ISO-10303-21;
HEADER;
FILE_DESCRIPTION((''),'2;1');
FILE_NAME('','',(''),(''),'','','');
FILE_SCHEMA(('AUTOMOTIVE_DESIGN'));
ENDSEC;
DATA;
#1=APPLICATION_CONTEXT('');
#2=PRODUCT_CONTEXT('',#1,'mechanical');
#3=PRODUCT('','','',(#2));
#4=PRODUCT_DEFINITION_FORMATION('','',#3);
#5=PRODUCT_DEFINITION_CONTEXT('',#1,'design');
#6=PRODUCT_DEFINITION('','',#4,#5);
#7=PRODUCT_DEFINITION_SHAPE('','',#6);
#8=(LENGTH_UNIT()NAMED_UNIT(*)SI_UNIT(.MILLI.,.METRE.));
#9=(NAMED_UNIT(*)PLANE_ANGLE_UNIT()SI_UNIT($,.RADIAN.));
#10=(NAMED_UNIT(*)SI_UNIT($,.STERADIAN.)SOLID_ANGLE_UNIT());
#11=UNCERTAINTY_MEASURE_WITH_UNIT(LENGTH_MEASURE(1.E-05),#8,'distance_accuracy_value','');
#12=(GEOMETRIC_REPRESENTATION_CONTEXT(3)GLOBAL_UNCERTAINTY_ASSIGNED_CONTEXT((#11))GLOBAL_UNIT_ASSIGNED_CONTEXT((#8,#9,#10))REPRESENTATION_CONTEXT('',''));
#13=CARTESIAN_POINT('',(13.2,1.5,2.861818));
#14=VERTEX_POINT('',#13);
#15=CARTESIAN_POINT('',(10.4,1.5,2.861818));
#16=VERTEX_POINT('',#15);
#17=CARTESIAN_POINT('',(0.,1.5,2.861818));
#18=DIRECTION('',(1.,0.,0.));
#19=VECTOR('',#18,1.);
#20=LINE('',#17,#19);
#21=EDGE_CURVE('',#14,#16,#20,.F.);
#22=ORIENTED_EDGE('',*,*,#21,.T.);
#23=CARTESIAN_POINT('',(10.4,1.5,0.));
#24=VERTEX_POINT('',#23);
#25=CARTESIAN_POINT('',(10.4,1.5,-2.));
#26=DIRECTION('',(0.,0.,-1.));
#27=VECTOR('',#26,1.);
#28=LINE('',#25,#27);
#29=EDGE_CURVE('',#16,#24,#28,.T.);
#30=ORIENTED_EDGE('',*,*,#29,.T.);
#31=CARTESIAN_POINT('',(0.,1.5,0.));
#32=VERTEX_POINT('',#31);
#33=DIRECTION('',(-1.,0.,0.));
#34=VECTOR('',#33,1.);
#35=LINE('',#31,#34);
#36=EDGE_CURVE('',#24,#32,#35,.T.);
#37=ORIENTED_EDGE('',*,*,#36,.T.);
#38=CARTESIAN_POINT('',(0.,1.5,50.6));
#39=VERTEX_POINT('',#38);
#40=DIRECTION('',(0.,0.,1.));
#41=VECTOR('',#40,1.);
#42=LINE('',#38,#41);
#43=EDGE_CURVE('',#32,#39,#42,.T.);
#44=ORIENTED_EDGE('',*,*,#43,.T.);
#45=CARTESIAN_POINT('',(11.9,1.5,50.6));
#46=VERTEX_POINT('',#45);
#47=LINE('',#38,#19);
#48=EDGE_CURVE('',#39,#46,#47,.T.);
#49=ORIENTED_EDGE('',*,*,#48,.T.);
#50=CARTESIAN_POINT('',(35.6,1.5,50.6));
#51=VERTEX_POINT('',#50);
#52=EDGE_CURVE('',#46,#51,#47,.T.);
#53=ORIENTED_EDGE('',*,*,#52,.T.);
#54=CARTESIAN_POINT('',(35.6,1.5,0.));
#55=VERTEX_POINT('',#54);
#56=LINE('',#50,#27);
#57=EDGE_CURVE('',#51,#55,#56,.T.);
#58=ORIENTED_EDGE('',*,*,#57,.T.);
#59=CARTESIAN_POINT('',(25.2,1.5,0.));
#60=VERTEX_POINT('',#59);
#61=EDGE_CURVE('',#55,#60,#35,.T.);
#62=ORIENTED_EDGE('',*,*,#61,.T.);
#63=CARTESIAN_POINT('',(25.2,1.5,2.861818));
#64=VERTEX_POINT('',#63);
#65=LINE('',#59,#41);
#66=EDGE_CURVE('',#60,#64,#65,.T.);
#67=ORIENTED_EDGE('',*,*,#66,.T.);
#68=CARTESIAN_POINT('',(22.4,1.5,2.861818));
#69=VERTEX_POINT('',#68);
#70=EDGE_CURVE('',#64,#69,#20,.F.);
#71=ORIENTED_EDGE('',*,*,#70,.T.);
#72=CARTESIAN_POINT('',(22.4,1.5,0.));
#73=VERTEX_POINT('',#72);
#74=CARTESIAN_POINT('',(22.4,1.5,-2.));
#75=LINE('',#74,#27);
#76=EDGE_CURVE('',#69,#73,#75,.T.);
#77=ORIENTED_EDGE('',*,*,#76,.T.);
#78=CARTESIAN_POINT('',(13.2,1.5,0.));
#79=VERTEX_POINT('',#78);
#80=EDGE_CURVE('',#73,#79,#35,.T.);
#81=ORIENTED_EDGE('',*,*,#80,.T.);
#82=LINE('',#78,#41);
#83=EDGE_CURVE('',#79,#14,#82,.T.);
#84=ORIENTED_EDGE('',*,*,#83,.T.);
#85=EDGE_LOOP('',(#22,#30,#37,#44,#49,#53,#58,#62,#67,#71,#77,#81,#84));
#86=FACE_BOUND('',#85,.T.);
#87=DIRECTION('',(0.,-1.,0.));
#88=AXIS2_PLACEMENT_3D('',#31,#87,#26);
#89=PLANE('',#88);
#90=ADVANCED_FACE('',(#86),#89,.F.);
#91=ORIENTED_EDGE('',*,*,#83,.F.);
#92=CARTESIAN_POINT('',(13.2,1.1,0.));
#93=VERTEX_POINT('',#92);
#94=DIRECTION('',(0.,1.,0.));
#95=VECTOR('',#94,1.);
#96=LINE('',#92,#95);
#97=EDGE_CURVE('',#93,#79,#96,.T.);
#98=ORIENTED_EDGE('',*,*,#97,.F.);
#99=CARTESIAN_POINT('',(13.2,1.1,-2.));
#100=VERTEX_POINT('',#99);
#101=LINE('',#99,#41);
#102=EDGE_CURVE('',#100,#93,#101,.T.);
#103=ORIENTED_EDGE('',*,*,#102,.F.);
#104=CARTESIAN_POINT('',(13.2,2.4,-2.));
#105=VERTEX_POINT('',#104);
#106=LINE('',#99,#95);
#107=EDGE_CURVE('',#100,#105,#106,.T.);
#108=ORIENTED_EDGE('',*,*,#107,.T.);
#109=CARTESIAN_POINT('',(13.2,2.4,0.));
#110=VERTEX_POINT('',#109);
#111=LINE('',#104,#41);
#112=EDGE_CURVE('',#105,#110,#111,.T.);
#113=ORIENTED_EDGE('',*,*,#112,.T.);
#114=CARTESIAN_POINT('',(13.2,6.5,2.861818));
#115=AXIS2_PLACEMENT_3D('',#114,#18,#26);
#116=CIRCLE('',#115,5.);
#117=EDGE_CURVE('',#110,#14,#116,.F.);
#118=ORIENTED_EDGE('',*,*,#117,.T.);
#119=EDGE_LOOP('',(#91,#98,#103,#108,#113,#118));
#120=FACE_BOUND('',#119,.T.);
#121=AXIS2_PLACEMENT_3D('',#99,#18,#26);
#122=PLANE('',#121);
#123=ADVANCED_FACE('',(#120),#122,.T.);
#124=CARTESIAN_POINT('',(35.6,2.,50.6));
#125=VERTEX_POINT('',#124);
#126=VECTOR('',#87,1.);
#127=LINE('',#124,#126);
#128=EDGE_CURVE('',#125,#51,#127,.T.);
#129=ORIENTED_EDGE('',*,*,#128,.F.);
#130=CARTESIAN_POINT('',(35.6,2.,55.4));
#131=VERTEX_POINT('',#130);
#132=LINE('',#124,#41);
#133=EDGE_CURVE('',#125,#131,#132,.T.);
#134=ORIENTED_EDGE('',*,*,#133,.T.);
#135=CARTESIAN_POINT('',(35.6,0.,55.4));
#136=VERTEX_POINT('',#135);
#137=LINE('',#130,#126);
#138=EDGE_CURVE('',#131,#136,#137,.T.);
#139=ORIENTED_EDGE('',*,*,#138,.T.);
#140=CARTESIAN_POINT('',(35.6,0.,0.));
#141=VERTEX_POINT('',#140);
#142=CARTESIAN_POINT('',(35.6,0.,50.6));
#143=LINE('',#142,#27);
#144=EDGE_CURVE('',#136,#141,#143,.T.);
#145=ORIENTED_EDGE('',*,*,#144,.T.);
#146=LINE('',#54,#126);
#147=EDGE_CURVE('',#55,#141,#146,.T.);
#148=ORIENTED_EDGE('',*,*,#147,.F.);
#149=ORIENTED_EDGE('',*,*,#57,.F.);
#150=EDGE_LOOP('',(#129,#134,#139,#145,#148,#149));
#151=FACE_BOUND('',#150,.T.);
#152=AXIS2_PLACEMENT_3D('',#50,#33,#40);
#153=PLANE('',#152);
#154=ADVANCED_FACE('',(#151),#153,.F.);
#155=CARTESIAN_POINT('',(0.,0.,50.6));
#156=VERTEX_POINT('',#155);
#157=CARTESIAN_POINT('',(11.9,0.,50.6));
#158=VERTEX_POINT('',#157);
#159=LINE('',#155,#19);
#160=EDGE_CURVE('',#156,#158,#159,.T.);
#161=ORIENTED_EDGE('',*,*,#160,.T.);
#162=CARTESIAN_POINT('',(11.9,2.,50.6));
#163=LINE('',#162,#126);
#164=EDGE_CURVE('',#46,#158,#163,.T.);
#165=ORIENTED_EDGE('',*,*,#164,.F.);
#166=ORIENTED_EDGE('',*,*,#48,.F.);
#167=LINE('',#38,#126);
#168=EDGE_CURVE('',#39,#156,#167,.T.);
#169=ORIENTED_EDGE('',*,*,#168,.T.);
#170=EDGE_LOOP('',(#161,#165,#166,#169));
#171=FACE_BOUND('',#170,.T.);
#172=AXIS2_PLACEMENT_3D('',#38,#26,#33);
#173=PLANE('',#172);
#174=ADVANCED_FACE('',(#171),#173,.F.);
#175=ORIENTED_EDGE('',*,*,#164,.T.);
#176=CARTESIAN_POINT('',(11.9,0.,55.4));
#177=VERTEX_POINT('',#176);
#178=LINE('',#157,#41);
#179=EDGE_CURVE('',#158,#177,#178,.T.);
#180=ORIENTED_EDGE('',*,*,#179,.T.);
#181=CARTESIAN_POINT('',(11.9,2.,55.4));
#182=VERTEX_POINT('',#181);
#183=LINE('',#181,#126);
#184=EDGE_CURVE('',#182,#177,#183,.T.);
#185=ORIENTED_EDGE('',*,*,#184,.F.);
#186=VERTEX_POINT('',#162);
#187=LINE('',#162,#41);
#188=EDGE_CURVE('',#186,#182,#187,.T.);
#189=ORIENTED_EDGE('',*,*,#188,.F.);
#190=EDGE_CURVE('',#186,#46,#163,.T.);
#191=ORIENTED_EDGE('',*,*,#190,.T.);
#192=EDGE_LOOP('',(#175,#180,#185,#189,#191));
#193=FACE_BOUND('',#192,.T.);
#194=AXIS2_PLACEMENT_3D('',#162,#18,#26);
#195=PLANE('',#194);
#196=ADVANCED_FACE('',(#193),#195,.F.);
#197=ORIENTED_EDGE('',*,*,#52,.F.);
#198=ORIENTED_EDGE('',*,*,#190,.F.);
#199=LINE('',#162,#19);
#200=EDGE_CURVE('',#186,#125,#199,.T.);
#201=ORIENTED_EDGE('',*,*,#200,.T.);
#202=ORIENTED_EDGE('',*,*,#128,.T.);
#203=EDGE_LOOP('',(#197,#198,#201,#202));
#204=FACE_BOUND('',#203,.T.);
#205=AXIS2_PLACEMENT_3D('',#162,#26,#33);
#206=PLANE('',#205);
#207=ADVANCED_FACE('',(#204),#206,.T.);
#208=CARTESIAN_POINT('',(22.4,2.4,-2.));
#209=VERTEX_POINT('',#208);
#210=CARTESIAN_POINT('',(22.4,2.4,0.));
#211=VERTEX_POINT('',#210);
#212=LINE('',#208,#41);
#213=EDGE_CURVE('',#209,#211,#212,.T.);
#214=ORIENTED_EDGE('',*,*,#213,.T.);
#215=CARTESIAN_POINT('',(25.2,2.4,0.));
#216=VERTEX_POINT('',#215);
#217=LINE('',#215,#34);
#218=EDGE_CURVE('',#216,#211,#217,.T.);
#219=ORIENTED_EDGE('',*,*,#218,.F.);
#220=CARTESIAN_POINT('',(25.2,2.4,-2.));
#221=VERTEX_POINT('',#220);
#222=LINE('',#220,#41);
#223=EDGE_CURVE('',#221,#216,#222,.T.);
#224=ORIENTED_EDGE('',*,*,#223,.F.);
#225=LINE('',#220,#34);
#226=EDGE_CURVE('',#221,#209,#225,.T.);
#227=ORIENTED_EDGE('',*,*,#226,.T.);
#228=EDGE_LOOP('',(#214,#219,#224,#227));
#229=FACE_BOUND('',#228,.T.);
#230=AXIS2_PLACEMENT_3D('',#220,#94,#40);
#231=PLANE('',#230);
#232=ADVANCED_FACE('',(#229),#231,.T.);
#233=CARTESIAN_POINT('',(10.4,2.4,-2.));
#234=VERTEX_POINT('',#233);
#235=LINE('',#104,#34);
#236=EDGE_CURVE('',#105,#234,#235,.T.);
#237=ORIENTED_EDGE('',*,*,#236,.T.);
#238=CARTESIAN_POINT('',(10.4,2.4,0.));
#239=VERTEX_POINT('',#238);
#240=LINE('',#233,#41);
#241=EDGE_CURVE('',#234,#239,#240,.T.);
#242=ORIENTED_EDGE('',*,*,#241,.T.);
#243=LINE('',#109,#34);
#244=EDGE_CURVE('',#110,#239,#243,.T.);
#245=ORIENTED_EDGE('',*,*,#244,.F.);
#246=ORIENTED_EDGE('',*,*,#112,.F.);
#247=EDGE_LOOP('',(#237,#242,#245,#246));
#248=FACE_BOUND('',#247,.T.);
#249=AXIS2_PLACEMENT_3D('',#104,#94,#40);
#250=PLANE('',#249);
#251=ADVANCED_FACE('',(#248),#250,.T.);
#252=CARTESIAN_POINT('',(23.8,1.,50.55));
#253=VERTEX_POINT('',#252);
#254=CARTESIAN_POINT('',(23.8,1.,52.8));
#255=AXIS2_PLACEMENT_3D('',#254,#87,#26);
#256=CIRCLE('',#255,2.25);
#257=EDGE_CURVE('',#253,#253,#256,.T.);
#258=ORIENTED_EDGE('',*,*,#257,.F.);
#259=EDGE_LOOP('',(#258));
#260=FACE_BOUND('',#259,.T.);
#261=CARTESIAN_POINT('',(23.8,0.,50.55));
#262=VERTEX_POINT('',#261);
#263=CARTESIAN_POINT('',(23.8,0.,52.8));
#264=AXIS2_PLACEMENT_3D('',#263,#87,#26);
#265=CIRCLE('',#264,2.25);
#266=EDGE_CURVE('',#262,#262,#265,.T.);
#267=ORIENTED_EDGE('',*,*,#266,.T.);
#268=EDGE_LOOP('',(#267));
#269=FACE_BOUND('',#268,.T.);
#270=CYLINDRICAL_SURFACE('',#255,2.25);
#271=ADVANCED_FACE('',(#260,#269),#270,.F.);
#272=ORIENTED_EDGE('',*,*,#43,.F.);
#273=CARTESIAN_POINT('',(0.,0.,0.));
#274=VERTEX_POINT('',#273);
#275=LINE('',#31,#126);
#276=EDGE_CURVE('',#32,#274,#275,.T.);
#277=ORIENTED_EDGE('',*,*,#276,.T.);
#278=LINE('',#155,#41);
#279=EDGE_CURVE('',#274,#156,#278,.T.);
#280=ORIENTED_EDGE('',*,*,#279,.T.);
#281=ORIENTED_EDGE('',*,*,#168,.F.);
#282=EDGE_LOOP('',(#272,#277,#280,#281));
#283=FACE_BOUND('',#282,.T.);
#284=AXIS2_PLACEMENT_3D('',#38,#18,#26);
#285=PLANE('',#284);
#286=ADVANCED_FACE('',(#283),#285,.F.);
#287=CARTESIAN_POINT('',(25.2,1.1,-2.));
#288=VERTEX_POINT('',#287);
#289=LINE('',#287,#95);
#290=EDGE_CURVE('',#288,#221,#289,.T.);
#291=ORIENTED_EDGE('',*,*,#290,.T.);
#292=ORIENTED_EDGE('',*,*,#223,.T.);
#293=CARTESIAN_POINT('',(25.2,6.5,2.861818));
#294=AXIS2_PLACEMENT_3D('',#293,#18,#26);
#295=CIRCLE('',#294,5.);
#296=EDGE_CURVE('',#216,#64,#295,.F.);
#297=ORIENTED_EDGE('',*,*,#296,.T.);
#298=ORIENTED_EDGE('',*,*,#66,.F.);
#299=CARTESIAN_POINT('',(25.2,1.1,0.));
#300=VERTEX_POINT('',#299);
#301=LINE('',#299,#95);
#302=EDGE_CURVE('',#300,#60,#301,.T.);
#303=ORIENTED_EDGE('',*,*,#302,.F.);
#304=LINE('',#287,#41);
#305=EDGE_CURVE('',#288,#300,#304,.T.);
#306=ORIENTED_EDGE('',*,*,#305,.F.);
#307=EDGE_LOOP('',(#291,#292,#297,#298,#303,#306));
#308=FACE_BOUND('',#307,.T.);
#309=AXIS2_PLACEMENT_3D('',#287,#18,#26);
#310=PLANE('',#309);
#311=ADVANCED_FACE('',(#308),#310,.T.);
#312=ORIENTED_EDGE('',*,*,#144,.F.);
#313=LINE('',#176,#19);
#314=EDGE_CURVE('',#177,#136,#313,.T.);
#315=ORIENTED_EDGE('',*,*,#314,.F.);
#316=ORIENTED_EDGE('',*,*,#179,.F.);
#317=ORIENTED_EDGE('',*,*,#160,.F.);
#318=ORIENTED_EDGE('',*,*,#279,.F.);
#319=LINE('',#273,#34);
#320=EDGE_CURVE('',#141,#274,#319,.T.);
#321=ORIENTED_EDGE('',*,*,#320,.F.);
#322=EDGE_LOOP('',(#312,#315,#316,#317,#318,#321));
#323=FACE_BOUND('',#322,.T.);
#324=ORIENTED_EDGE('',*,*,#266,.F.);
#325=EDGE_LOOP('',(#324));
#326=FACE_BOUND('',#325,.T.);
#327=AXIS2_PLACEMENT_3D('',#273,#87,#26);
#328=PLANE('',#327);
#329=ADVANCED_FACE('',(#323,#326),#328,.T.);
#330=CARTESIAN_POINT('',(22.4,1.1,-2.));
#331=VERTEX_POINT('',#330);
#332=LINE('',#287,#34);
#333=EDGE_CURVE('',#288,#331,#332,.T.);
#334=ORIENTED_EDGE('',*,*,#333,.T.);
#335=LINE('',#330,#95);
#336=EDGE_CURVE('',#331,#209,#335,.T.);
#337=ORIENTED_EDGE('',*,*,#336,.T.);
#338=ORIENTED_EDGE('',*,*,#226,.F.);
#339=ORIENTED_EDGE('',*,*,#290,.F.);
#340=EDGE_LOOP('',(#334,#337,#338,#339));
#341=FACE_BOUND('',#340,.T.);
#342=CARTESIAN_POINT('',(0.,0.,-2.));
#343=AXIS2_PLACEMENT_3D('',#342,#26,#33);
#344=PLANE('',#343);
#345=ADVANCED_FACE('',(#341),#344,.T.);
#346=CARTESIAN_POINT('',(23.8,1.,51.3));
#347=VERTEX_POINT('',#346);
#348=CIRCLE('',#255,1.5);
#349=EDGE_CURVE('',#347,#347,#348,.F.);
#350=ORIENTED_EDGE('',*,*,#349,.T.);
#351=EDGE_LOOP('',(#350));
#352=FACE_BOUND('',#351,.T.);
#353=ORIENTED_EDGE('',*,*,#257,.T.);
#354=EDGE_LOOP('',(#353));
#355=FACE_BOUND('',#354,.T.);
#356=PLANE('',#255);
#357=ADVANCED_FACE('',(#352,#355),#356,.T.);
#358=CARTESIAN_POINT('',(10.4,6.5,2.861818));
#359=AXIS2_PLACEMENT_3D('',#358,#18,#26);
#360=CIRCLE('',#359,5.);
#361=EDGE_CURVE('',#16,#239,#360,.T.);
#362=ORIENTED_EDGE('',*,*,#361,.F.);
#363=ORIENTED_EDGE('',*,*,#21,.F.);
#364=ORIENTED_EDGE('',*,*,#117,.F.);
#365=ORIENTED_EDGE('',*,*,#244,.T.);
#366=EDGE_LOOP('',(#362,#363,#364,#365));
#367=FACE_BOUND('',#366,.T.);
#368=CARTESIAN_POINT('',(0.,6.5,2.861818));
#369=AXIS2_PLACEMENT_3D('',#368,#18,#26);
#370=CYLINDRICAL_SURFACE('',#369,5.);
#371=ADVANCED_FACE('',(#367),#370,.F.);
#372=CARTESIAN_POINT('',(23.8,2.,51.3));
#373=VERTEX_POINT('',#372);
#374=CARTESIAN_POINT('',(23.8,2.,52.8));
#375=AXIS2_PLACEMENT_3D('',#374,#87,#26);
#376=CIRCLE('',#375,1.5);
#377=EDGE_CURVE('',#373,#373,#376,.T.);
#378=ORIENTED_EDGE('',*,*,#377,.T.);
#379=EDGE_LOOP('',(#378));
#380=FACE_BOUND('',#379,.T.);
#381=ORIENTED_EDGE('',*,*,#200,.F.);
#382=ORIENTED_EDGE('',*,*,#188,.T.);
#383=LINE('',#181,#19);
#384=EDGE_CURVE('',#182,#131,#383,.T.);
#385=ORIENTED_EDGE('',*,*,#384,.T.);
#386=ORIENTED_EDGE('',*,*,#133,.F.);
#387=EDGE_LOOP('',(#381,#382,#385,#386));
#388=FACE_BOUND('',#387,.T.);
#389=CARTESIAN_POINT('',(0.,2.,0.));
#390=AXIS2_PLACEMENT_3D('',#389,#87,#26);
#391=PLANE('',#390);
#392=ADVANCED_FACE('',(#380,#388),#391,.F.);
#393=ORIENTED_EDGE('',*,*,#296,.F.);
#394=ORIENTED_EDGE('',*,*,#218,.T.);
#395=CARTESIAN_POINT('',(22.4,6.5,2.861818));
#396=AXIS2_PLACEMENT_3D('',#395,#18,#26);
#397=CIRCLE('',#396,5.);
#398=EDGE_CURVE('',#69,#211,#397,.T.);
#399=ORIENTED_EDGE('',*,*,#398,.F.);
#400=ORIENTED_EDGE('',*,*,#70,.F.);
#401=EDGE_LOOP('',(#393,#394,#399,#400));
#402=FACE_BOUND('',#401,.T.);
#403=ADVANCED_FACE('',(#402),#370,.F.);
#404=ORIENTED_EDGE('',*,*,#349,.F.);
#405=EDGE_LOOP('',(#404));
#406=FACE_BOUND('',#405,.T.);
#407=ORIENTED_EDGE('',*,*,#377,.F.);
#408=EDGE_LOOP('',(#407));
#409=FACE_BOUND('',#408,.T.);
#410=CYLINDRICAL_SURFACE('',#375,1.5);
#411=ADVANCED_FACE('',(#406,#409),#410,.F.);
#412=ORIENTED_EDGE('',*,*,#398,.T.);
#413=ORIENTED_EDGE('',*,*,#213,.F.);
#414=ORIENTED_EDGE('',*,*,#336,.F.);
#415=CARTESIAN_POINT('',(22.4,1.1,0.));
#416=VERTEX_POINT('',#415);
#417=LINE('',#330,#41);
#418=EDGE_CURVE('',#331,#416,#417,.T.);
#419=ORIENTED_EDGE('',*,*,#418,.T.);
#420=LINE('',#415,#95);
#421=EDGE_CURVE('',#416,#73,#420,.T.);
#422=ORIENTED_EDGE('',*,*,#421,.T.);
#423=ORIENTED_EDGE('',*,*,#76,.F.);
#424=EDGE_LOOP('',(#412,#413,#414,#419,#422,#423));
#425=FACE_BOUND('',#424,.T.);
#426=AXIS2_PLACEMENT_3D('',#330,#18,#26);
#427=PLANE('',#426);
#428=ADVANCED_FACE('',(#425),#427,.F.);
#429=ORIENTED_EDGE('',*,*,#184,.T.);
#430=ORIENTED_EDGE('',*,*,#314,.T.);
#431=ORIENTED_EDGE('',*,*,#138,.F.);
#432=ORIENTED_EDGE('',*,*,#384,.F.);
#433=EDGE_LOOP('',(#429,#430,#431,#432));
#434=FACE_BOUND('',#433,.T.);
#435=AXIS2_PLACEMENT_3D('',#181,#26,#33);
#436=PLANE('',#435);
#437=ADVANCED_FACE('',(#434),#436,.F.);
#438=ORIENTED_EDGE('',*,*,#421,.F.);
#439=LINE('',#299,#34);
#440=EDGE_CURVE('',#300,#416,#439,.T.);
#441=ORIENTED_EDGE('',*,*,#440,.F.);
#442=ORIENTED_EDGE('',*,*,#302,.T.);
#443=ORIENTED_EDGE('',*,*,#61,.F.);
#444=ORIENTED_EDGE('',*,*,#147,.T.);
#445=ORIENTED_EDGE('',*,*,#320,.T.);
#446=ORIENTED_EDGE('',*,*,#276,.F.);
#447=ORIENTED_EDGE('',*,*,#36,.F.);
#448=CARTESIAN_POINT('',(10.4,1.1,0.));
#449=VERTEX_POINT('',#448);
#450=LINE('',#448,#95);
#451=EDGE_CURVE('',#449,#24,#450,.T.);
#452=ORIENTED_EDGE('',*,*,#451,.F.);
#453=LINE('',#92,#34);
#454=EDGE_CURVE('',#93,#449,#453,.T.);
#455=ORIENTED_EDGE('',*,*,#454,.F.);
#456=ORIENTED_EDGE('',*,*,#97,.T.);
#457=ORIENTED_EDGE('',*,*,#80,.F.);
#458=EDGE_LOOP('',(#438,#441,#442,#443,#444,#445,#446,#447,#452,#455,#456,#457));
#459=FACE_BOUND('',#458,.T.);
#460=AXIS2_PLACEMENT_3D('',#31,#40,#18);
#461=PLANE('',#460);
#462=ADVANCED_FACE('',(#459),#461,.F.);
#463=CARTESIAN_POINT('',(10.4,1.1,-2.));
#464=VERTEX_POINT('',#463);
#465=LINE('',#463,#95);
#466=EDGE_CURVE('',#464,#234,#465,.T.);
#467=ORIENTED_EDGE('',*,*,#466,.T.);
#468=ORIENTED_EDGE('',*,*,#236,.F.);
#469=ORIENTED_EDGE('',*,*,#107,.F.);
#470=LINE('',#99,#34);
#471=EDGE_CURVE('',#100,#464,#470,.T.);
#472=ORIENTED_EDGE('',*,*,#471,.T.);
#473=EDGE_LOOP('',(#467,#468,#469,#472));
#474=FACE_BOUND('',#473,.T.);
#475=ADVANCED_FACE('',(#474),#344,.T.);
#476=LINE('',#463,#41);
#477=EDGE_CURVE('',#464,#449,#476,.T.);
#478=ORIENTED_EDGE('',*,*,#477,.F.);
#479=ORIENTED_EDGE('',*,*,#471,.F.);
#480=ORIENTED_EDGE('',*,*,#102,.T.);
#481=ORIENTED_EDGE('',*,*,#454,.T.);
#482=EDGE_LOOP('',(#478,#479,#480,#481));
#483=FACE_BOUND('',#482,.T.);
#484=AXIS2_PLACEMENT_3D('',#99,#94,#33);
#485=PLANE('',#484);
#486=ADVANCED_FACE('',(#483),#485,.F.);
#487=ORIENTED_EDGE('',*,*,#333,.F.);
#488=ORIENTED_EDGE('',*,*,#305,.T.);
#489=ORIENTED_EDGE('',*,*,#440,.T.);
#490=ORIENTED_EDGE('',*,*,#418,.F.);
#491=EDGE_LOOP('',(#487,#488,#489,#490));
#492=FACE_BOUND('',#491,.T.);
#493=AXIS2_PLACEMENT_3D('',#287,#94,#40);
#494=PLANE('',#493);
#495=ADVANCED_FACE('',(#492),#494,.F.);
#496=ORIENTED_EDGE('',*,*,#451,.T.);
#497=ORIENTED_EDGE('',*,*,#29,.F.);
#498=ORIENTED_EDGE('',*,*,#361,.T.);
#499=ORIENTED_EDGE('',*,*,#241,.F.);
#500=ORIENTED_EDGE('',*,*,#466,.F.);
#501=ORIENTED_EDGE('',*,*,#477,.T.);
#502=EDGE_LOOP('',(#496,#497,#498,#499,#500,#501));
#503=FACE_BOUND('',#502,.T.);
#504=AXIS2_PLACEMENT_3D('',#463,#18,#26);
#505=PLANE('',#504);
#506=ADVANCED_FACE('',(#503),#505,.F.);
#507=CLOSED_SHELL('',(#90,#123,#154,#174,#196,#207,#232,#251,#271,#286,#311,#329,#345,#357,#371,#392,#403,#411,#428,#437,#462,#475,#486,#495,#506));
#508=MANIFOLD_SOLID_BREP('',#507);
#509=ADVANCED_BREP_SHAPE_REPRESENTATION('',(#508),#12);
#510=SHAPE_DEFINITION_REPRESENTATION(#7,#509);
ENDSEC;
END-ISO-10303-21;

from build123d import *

# Parameters (mm, degrees)
SKETCH_1_W          = 35.6
SKETCH_1_H          = 50.6
EXTRUDE_1_DEPTH     = 1.5
SKETCH_2_W          = 23.7
SKETCH_2_H          = 4.8
SKETCH_2_R          = 1.5
EXTRUDE_2_DEPTH     = 2
SKETCH_2_3_R        = 2.25
CUT_EXTRUDE_1_DEPTH = 1
SKETCH_3_W          = 2.8
SKETCH_3_H          = 1.3
EXTRUDE_3_DEPTH     = 2
FILLET_1_R          = 5


with BuildPart() as part:
    # 草图1 → 凸台-拉伸1 (new body)
    with BuildSketch(Plane(origin=(0, 0, 0), x_dir=(1, 0, 0), z_dir=(0, 1, 0))):
        with Locations((17.8, -25.3)):
            Rectangle(SKETCH_1_W, SKETCH_1_H)
    extrude(amount=EXTRUDE_1_DEPTH)

    # 草图2 → 凸台-拉伸2 (add)
    with BuildSketch(Plane.XZ):
        with Locations((23.75, 53)):
            Rectangle(SKETCH_2_W, SKETCH_2_H)
        with Locations(Location((23.8, 52.8, 0), (0, 0, 270))):
            Circle(SKETCH_2_R, mode=Mode.SUBTRACT)
    extrude(amount=-EXTRUDE_2_DEPTH)

    # 草图2<3> → 切除-拉伸1 (cut)
    with BuildSketch(Plane.XZ):
        with Locations(Location((23.8, 52.8, 0), (0, 0, 270))):
            Circle(SKETCH_2_3_R)
    extrude(amount=-CUT_EXTRUDE_1_DEPTH, mode=Mode.SUBTRACT)

    # 草图3 → 凸台-拉伸3 (add)
    with BuildSketch(Plane(origin=(0, 0, 0), x_dir=(-1, 0, 0), z_dir=(0, 0, -1))):
        with Locations((-23.8, 1.75)):
            Rectangle(SKETCH_3_W, SKETCH_3_H)
        with Locations((-11.8, 1.75)):
            Rectangle(SKETCH_3_W, SKETCH_3_H)
    extrude(amount=EXTRUDE_3_DEPTH)

    # 圆角1
    # the kernel refuses this fillet: 5 mm, written as the material it adds along each edge
    with BuildSketch(Plane(origin=(13.2, 1.5, 0), x_dir=(0, 0, 1), z_dir=(-1, 0, 0)), Plane(origin=(25.2, 1.5, 0), x_dir=(0, 0, 1), z_dir=(-1, 0, 0))) as fillet_1_piece_1:
        with BuildLine():
            CenterArc((2.861817604, 5), FILLET_1_R, 235.084793753, 34.915206247)
            Line((0, 0.9), (0, 0))
            Line((0, 0), (2.861817604, 0))
        make_face()
    extrude(amount=2.8)


solid = part.part
